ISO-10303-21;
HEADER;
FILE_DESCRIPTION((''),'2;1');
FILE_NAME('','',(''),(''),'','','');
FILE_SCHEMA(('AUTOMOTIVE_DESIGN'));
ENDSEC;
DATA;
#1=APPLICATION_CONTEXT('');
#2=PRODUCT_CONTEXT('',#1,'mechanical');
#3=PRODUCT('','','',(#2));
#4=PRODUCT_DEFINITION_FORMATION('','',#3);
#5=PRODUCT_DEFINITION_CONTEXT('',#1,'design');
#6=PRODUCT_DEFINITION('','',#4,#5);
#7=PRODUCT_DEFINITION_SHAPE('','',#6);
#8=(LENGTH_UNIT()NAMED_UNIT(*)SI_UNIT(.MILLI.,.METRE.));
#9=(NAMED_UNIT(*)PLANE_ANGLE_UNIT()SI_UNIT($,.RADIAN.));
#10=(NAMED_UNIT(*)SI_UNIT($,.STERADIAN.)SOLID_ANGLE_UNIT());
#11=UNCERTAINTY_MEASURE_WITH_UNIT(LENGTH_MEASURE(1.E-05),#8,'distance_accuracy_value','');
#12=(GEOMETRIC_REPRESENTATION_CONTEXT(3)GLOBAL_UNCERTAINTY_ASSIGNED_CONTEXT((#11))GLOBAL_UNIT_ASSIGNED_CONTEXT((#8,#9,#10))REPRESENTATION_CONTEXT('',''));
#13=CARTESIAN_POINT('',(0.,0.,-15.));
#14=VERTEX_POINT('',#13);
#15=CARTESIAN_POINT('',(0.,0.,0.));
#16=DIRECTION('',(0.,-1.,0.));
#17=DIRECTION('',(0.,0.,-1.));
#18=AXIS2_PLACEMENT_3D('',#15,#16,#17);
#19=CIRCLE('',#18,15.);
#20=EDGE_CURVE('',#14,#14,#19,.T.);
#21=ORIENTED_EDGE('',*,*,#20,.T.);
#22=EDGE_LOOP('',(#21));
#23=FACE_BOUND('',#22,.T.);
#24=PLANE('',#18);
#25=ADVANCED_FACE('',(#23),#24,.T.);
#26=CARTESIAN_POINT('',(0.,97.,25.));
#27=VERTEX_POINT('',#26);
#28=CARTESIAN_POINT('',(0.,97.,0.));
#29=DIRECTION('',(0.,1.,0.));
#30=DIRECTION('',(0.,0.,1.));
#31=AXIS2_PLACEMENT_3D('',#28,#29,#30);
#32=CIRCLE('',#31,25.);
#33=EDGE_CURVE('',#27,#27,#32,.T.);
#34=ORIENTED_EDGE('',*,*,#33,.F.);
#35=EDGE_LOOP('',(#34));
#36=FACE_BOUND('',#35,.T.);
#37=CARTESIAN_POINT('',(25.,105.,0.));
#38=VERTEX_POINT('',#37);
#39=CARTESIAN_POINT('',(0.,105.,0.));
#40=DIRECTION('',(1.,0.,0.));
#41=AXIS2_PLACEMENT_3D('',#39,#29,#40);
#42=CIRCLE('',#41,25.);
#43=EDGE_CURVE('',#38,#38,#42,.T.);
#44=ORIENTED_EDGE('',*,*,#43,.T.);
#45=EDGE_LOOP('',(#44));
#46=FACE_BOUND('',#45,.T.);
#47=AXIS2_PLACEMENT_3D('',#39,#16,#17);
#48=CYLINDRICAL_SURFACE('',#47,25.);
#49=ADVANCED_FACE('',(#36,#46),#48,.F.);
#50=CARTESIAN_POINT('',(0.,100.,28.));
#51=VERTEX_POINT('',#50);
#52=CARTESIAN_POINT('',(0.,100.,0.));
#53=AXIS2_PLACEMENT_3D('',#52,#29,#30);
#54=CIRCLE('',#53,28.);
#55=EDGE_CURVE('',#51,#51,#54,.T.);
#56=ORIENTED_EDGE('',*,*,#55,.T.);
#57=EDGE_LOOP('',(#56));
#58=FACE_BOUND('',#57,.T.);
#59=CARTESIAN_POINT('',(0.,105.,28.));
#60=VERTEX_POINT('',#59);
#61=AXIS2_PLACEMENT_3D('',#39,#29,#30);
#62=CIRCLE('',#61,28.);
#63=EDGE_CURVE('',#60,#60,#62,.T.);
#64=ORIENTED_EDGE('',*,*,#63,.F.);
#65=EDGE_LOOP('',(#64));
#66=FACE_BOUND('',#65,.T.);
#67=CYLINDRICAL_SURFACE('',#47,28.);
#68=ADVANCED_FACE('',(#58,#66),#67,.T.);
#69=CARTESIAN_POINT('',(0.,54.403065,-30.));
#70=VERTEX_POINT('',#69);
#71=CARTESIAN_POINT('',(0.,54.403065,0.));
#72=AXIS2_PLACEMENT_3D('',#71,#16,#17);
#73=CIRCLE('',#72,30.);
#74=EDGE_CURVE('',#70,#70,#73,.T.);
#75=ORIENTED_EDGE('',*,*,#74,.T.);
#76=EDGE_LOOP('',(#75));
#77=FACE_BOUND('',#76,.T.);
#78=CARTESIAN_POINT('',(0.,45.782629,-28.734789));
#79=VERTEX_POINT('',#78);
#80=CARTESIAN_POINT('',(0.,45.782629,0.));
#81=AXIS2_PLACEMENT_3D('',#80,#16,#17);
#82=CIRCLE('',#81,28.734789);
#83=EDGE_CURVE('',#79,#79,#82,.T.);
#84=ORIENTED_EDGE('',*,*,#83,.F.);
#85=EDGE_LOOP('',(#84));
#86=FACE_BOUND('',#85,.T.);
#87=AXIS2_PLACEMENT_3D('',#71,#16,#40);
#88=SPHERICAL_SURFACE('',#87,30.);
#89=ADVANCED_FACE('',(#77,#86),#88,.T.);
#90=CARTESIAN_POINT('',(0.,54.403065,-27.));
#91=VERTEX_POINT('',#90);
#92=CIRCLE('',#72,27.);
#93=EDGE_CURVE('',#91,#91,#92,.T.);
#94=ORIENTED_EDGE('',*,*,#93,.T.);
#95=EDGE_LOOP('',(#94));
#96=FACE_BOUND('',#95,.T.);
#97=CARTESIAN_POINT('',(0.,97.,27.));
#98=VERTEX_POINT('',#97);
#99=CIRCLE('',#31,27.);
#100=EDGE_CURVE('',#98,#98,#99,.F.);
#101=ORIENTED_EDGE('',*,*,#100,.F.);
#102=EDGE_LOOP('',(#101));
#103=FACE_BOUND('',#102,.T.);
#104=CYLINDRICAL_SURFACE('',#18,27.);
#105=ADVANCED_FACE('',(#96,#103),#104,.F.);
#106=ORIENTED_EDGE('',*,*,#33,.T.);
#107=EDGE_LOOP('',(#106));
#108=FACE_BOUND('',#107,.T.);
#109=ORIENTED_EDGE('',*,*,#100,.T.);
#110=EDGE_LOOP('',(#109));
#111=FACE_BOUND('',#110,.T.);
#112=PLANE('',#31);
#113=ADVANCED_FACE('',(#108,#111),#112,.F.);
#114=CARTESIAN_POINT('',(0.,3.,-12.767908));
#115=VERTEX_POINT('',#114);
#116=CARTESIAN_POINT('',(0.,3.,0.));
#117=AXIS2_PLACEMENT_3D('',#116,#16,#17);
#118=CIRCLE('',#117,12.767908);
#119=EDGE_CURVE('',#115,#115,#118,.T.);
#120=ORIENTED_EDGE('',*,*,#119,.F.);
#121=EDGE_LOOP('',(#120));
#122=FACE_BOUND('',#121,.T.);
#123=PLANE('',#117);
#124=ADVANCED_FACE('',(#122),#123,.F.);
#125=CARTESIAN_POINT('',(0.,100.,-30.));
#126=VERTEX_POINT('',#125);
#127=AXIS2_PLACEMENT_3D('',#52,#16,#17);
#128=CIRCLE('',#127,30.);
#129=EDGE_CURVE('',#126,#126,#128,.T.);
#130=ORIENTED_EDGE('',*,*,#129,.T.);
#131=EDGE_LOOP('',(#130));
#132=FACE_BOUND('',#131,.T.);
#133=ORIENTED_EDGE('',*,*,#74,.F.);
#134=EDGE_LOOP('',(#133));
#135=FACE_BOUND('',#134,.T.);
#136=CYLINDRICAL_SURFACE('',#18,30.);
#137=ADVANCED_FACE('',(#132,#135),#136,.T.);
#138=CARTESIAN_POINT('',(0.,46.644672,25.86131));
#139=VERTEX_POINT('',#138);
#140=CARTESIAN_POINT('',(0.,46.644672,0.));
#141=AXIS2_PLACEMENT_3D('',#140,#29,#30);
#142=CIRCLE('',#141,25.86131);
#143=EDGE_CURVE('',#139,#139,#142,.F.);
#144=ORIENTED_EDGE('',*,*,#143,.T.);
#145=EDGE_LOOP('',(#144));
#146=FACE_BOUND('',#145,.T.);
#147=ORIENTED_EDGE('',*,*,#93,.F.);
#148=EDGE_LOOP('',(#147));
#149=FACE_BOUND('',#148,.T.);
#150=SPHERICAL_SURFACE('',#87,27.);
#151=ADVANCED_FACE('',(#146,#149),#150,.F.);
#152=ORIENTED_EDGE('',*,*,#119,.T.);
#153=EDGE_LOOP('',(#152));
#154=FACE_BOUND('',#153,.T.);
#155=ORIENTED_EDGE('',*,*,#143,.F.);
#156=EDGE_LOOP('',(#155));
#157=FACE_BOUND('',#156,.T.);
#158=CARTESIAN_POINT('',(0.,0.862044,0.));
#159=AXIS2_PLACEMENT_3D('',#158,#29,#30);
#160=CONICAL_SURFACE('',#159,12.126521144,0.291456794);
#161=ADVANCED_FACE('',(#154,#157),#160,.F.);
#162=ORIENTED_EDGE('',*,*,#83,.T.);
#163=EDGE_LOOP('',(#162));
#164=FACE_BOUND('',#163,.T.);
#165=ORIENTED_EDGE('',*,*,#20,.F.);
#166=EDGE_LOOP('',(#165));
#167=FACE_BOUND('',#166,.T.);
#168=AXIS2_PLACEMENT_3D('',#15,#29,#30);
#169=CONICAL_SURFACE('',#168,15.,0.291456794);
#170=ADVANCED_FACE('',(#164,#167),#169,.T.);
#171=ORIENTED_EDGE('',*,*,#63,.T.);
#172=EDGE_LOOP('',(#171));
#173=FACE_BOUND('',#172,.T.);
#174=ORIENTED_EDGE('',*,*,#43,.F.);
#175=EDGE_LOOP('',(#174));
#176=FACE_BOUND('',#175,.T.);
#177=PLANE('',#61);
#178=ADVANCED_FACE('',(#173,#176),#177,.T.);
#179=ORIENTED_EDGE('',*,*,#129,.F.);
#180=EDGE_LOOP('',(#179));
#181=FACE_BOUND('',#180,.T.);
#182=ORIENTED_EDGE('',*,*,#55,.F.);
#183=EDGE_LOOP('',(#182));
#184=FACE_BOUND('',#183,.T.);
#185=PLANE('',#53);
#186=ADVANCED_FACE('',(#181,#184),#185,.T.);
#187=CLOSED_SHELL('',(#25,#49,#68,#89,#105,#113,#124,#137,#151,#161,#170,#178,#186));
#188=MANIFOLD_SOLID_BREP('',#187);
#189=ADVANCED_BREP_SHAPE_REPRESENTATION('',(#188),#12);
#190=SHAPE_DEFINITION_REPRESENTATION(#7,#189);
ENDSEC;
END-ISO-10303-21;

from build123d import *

# Parameters (mm, degrees)
SKETCH4_R           = 28
SKETCH4_R_2         = 25
EXTRUDE_THIN2_DEPTH = 5


# Read off the part's stored shape, not the designer's step: Shell1
with BuildPart() as part:
    # Sketch1 → Revolve1 (revolve)
    with BuildSketch(Plane.XY, mode=Mode.PRIVATE) as revolve1_sk:
        with BuildLine():
            Line((0, 0), (0, 100))
            Line((0, 100), (30, 100))
            Line((30, 100), (30, 54.403065089))
            ThreePointArc((30, 54.403065089), (29.682011865, 50.046670749), (28.734788557, 45.782628522))
            Line((28.734788557, 45.782628522), (15, 0))
            Line((15, 0), (0, 0))
        make_face()
    revolve(revolve1_sk.sketch.rotate(Axis((0, 0, 0), (0, 1, 0)), 90), axis=Axis((0, 0, 0), (0, 1, 0)))

    # Sketch4 → Extrude-Thin2 (add)
    with BuildSketch(Plane(origin=(0, 100, 0), x_dir=(1, 0, 0), z_dir=(0, 1, 0))):
        Circle(SKETCH4_R)
        Circle(SKETCH4_R_2, mode=Mode.SUBTRACT)
    extrude(amount=EXTRUDE_THIN2_DEPTH)

    # Shell1 outline → Shell1 (revolve, cut)
    with BuildSketch(Plane.XY):
        with BuildLine():
            Line((25, 97), (25, 100))
            Line((25, 100), (0, 100))
            Line((0, 100), (0, 3))
            Line((0, 3), (12.767908047, 3))
            Line((12.767908047, 3), (25.861309693, 46.644672153))
            ThreePointArc((25.861309693, 46.644672153), (26.713810678, 50.482310183), (27, 54.403065116))
            Line((27, 54.403065116), (27, 97))
            Line((27, 97), (25, 97))
        make_face()
    revolve(axis=Axis((0, 0, 0), (0, 1, 0)), mode=Mode.SUBTRACT)


solid = part.part
